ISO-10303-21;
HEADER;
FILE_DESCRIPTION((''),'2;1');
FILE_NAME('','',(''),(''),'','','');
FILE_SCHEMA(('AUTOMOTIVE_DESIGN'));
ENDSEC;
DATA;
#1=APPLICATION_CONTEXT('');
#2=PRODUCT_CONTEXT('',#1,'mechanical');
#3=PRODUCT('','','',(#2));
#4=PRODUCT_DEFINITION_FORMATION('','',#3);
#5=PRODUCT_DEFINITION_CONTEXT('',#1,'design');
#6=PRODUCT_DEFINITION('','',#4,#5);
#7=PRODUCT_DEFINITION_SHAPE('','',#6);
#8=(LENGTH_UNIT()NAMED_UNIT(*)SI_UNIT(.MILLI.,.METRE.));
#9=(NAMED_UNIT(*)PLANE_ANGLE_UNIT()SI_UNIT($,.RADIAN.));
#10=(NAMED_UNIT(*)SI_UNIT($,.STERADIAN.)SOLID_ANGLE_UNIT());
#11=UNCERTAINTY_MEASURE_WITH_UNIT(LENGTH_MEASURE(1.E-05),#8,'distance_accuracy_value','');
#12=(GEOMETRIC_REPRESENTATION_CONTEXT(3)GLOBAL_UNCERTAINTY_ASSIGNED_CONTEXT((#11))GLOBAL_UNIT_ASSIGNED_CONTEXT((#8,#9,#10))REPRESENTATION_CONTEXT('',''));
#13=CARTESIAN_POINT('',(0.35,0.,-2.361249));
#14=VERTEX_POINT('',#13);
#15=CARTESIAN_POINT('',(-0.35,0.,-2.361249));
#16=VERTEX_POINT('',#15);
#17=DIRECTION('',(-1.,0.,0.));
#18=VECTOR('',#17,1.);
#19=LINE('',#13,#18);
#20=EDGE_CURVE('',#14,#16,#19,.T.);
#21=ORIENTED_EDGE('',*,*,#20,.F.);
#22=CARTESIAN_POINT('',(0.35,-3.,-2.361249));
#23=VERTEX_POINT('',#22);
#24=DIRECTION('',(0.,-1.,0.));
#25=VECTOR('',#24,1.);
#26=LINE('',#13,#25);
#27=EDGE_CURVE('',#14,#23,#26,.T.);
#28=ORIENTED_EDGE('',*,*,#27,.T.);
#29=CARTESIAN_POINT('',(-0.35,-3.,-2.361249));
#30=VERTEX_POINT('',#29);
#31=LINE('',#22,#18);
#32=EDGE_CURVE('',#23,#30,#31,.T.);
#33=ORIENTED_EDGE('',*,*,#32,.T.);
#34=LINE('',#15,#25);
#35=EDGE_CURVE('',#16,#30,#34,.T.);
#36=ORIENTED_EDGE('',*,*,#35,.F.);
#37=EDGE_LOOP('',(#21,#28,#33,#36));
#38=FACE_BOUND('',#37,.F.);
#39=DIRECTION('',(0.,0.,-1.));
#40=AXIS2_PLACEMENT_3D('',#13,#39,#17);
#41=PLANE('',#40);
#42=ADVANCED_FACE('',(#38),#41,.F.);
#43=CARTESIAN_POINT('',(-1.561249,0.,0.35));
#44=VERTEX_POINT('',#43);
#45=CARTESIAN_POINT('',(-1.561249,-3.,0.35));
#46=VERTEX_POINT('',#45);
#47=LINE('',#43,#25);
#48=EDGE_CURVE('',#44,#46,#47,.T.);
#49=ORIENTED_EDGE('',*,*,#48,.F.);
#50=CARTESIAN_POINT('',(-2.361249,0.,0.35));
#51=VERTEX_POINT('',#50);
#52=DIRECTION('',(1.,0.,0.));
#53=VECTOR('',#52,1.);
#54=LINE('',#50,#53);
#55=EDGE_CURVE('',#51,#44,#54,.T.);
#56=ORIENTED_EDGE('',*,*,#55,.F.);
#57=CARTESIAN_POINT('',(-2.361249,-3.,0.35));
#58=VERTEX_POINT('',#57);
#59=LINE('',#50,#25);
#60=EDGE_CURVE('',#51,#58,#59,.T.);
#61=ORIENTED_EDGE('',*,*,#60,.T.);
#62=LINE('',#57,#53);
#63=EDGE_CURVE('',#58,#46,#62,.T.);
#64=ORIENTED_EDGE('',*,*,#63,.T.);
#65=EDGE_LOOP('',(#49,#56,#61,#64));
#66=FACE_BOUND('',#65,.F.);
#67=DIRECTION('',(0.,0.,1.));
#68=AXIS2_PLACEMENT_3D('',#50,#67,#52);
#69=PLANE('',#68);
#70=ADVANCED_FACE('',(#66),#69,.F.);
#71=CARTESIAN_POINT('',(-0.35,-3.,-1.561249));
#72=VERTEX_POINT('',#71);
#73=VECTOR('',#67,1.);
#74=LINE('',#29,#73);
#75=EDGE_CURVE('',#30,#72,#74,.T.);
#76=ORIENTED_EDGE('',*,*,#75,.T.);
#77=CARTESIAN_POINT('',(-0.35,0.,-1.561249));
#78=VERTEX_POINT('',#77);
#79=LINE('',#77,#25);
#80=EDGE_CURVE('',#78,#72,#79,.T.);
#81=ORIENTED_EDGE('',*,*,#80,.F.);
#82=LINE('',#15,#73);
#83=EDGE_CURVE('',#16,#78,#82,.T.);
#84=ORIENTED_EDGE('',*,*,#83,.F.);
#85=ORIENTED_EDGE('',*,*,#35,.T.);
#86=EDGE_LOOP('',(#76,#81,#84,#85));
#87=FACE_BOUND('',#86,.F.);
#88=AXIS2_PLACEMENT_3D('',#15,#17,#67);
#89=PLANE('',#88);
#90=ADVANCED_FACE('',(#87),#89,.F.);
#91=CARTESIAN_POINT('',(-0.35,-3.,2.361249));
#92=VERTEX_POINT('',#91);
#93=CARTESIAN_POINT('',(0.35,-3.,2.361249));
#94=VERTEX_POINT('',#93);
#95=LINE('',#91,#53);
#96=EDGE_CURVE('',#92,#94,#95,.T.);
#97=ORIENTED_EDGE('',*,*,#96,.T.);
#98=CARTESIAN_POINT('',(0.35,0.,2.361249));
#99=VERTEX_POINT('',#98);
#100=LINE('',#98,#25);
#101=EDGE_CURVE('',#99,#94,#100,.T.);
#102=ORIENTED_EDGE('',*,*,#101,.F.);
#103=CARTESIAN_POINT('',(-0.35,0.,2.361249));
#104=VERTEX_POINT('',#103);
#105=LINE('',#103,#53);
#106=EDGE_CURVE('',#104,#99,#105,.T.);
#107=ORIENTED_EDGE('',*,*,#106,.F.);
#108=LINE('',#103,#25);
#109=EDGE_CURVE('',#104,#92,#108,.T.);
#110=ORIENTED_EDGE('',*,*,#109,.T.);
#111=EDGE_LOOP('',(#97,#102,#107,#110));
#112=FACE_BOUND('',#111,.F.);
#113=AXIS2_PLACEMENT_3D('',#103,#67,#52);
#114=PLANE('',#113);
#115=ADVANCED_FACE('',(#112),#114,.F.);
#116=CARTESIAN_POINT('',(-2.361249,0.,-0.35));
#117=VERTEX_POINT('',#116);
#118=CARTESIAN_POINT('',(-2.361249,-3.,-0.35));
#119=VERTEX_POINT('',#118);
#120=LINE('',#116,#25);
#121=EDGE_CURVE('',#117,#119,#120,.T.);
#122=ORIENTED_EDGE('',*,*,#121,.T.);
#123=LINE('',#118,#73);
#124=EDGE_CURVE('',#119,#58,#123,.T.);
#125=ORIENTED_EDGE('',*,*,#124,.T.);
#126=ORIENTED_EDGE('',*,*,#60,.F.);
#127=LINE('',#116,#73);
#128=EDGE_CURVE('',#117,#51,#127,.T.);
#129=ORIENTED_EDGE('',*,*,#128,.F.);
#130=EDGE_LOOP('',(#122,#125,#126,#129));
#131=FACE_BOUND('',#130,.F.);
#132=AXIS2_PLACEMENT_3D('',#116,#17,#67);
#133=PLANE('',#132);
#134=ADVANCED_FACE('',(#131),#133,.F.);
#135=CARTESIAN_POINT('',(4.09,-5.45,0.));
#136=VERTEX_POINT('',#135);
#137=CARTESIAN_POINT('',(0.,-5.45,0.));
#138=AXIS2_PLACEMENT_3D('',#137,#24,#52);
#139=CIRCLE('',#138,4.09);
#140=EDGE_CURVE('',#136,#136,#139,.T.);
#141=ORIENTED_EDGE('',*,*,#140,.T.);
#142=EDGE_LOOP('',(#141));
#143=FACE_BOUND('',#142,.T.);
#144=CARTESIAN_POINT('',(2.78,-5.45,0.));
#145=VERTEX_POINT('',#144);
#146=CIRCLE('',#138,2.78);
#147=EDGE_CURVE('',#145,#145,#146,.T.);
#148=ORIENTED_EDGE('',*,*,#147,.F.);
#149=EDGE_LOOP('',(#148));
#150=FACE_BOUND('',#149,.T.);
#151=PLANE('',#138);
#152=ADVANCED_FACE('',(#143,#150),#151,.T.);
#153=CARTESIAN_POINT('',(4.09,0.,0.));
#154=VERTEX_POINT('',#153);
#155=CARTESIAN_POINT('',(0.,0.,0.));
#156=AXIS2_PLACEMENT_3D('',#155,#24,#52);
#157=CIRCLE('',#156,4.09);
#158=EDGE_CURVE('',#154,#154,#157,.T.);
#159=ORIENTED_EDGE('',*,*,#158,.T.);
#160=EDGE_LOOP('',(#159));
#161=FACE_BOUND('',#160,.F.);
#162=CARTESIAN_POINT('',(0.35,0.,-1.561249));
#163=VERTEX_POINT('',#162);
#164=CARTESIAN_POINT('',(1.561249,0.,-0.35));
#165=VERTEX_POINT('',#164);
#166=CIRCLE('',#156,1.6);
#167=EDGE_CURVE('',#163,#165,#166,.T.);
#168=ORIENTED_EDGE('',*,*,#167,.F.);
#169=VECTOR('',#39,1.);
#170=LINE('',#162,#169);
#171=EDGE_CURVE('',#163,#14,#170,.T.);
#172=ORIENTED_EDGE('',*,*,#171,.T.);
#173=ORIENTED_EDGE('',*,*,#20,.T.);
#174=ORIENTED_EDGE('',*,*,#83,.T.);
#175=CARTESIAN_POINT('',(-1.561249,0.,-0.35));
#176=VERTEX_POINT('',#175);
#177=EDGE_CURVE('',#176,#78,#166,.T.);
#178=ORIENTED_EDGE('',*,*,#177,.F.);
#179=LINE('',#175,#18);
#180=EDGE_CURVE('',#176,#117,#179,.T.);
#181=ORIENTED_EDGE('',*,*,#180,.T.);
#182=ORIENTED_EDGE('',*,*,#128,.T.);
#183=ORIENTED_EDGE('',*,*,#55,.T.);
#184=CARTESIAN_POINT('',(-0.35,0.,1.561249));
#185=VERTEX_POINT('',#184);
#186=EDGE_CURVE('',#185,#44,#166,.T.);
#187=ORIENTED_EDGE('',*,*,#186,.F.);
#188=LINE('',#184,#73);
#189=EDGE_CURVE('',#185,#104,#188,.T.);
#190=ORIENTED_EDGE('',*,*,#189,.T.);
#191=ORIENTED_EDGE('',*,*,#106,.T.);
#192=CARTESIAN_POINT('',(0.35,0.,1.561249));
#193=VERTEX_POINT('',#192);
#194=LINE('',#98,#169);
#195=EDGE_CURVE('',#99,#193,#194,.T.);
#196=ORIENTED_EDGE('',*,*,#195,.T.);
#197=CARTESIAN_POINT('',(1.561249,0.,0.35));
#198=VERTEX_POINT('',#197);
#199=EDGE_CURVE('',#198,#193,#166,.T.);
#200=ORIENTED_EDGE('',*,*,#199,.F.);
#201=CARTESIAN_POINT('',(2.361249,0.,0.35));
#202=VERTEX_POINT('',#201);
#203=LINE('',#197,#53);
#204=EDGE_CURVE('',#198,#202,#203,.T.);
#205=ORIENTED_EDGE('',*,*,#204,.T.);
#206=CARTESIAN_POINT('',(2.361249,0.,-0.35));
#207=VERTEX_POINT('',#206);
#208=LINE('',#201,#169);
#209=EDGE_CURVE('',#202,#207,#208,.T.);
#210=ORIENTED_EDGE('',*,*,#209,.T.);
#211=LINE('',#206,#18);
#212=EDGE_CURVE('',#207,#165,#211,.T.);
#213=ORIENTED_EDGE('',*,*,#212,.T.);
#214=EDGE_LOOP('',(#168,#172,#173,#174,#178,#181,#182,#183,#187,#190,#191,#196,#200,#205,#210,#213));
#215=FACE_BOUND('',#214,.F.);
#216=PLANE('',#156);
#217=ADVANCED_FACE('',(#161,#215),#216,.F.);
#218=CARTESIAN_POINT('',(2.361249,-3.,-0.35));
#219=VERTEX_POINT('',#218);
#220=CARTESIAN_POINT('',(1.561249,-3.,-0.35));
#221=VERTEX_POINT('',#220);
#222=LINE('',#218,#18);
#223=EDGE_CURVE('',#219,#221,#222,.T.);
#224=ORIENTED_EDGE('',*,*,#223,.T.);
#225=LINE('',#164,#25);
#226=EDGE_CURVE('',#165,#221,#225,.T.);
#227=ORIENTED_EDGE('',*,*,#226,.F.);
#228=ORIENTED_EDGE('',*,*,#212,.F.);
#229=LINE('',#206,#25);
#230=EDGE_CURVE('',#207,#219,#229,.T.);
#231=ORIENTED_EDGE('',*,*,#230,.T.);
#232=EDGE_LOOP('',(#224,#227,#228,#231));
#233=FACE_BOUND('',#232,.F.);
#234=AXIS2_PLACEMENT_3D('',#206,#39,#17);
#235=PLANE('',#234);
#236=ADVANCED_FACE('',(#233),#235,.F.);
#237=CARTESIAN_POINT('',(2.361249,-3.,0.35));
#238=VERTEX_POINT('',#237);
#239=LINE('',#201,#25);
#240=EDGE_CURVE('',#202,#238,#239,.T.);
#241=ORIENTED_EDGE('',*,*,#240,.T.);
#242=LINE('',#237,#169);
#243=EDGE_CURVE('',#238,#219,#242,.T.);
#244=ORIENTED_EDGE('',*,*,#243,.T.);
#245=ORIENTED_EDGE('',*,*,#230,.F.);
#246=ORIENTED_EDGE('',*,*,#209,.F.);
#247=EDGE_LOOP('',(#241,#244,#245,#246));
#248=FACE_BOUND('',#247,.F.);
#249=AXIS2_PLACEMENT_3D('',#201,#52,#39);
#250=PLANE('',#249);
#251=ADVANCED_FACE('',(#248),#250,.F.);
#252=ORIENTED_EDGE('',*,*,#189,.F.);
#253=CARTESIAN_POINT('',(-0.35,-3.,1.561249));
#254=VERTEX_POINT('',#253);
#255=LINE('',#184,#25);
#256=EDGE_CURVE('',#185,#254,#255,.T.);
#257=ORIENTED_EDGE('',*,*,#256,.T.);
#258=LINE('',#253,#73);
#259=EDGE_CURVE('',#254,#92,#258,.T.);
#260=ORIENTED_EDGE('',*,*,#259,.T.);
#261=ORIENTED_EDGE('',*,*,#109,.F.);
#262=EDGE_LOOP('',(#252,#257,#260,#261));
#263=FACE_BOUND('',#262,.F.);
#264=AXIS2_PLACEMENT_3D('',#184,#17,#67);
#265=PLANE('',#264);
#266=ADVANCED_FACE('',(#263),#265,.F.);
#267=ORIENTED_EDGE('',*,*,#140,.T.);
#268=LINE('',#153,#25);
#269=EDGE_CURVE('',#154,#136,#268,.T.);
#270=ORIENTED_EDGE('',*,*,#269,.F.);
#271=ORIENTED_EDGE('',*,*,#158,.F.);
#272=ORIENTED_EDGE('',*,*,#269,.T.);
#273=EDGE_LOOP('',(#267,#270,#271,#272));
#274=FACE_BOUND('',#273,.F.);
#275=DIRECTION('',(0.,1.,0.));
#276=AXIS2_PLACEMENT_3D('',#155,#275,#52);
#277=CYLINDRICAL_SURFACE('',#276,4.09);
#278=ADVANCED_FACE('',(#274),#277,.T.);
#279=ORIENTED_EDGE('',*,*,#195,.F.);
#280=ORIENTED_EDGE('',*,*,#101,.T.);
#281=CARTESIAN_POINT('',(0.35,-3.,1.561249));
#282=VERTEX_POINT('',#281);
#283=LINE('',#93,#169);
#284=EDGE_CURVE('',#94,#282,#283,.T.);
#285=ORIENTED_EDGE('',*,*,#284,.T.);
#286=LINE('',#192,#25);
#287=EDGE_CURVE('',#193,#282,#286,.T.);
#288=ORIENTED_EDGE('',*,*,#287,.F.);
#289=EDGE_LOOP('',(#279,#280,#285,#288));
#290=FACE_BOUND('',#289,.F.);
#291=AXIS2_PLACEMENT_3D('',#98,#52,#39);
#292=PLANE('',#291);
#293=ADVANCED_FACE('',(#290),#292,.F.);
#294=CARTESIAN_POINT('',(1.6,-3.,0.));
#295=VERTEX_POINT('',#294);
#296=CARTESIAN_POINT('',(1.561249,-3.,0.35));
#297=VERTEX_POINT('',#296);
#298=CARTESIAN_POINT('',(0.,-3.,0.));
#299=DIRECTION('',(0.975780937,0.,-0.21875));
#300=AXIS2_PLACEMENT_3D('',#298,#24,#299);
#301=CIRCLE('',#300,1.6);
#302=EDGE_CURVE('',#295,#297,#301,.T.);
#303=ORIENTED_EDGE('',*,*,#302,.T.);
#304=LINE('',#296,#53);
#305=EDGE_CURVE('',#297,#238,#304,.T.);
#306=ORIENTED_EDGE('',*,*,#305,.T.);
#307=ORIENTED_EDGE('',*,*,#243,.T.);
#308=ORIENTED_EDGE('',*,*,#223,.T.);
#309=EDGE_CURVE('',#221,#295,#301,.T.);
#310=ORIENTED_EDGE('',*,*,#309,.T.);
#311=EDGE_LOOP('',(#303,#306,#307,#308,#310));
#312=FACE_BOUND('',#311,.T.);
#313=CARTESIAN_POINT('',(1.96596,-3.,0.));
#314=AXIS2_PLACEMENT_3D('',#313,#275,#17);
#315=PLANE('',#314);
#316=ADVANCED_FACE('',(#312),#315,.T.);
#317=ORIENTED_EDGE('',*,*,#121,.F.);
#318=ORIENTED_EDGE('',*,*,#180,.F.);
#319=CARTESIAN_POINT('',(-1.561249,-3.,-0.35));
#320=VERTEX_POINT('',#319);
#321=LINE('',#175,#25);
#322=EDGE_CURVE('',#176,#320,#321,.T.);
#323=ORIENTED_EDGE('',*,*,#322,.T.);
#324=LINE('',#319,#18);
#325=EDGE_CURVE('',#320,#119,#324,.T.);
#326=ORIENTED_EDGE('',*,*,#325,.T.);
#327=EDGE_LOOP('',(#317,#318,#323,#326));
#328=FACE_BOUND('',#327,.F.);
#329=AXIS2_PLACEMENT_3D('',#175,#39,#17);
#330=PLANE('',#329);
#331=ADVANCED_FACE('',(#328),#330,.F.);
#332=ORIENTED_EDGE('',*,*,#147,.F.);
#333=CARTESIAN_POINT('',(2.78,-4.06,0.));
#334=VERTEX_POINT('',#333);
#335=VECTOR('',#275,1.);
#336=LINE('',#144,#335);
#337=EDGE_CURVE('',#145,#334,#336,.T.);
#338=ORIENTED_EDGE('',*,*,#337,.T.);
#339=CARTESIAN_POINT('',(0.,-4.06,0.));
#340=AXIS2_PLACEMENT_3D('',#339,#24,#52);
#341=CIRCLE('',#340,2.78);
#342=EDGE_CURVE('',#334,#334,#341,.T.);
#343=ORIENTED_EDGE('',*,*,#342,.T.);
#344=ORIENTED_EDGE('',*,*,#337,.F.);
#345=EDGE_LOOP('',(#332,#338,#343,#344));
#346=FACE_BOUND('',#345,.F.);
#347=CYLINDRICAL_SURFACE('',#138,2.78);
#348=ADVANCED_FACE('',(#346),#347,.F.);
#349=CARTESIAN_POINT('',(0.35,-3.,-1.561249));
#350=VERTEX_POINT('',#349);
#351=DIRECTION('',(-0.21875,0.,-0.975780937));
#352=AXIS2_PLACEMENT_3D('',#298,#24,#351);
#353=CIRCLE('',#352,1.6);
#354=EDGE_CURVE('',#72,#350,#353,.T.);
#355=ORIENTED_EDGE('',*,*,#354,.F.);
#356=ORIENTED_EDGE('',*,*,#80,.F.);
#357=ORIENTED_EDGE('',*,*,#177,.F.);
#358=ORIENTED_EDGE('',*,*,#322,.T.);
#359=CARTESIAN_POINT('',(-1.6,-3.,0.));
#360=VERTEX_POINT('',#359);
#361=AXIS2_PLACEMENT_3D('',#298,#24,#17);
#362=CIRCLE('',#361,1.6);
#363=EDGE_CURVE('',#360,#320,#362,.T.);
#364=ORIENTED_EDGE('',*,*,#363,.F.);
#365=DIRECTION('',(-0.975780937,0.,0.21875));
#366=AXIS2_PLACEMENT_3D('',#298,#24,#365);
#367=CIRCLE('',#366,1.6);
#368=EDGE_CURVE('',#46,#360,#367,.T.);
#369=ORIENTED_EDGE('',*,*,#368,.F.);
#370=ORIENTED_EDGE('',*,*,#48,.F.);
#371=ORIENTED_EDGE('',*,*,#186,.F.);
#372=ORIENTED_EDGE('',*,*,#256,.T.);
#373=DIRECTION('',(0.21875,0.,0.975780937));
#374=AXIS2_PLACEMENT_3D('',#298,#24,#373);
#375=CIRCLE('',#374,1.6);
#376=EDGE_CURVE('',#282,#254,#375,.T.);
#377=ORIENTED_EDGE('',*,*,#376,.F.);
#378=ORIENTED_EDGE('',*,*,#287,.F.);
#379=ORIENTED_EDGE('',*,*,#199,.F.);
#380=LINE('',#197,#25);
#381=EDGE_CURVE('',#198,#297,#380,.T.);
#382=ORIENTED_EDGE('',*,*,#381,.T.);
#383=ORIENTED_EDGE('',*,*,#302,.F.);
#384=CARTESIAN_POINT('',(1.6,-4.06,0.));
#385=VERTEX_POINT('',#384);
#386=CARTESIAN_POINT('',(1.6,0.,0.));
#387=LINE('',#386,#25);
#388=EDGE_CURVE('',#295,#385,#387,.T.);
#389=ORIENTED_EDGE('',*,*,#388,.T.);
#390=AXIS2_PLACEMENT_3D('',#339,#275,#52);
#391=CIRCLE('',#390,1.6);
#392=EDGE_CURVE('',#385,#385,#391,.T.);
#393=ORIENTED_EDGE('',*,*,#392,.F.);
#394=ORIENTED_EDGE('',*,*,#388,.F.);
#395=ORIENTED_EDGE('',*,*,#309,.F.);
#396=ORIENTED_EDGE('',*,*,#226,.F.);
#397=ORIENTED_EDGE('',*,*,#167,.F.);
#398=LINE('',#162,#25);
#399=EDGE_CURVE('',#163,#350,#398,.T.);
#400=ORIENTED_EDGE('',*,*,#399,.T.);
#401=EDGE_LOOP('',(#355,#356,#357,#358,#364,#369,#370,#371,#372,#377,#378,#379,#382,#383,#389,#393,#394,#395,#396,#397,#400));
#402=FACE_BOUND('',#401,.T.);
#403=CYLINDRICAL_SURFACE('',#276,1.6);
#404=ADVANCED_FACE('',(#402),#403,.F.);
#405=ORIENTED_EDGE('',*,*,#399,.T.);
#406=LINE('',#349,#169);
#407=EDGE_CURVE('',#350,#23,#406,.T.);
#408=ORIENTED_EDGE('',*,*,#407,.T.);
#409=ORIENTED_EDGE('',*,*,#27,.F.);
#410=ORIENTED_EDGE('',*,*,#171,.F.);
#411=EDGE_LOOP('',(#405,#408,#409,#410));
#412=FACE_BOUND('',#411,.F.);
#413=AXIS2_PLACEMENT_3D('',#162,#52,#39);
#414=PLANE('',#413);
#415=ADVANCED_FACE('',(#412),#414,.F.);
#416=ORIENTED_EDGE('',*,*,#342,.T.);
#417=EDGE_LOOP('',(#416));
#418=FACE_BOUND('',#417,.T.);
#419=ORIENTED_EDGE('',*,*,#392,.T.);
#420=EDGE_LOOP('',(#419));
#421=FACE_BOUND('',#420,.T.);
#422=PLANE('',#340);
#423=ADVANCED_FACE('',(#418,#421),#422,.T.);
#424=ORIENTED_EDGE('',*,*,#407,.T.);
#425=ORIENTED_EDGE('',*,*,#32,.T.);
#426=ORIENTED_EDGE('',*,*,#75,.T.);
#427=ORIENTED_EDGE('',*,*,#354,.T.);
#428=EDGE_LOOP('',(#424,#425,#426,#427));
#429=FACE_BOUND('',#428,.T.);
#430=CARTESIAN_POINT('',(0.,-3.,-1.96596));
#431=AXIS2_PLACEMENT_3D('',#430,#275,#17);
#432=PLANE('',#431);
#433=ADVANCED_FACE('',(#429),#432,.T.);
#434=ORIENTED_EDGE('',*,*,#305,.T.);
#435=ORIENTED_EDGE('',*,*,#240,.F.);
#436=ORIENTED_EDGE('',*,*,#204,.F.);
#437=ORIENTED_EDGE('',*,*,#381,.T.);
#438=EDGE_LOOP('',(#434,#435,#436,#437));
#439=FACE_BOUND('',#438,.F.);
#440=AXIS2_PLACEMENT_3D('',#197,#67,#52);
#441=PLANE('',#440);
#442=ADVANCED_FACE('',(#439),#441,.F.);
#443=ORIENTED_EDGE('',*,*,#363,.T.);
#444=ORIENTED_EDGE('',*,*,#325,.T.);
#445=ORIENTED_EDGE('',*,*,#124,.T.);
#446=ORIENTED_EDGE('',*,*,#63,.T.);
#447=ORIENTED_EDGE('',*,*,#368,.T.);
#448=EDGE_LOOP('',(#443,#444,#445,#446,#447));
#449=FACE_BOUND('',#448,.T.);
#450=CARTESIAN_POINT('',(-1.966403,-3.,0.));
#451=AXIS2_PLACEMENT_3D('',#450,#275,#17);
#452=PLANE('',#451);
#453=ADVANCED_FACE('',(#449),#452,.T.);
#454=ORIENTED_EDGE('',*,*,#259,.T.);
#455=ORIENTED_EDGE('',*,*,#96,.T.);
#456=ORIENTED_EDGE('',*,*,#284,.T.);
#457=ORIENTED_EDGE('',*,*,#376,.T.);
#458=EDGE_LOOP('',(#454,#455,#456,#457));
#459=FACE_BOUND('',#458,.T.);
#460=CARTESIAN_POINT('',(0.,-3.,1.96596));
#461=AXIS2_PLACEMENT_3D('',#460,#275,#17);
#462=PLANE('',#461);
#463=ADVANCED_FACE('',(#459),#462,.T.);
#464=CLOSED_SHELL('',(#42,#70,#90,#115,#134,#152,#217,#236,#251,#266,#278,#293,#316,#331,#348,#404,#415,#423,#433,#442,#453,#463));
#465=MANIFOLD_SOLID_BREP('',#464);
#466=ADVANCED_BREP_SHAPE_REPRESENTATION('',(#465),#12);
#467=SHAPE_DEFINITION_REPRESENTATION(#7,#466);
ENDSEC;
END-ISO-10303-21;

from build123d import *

# Parameters (mm, degrees)
F0_R     = 4.09
F0_R_2   = 1.6
F1_DEPTH = 5.45
F2_R     = 2.78
F3_DEPTH = 1.39
F5_DEPTH = 3


with BuildPart() as f1:
    # F0 (on Front) → F1 (new body)
    with BuildSketch(Plane.XZ):
        Circle(F0_R)
        Circle(F0_R_2, mode=Mode.SUBTRACT)
    extrude(amount=F1_DEPTH)

    # F2 (on face) → F3 (cut)
    with BuildSketch(Plane.XZ.offset(5.45)):
        Circle(F2_R)
    extrude(amount=-F3_DEPTH, mode=Mode.SUBTRACT)

    # F4 (on face) → F5 (cut)
    with BuildSketch(Plane(origin=(0, 0, 0), x_dir=(-1, 0, 0), z_dir=(0, 1, 0))):
        with BuildLine():
            Line((-0.35, 2.3612494996), (-0.35, 1.5612494996))
            ThreePointArc((-0.35, 1.5612494996), (0, 1.6), (0.35, 1.5612494996))
            Line((0.35, 1.5612494996), (0.35, 2.3612494996))
            Line((0.35, 2.3612494996), (-0.35, 2.3612494996))
        make_face()
        with BuildLine():
            Line((2.3612494996, 0.35), (1.5612494996, 0.35))
            ThreePointArc((1.5612494996, 0.35), (1.5902828678, 0.1760693054), (1.6, 0))
            ThreePointArc((1.6, 0), (1.5902828678, -0.1760693054), (1.5612494996, -0.35))
            Line((1.5612494996, -0.35), (2.3612494996, -0.35))
            Line((2.3612494996, -0.35), (2.3612494996, 0.35))
        make_face()
        with BuildLine():
            ThreePointArc((0.35, -1.5612494996), (0, -1.6), (-0.35, -1.5612494996))
            Line((-0.35, -1.5612494996), (-0.35, -2.3612494996))
            Line((-0.35, -2.3612494996), (0.35, -2.3612494996))
            Line((0.35, -2.3612494996), (0.35, -1.5612494996))
        make_face()
        with BuildLine():
            ThreePointArc((-1.5612494996, -0.35), (-1.6, 0), (-1.5612494996, 0.35))
            Line((-1.5612494996, 0.35), (-2.3612494996, 0.35))
            Line((-2.3612494996, 0.35), (-2.3612494996, -0.35))
            Line((-2.3612494996, -0.35), (-1.5612494996, -0.35))
        make_face()
    extrude(amount=-F5_DEPTH, mode=Mode.SUBTRACT)


solid = f1.part
